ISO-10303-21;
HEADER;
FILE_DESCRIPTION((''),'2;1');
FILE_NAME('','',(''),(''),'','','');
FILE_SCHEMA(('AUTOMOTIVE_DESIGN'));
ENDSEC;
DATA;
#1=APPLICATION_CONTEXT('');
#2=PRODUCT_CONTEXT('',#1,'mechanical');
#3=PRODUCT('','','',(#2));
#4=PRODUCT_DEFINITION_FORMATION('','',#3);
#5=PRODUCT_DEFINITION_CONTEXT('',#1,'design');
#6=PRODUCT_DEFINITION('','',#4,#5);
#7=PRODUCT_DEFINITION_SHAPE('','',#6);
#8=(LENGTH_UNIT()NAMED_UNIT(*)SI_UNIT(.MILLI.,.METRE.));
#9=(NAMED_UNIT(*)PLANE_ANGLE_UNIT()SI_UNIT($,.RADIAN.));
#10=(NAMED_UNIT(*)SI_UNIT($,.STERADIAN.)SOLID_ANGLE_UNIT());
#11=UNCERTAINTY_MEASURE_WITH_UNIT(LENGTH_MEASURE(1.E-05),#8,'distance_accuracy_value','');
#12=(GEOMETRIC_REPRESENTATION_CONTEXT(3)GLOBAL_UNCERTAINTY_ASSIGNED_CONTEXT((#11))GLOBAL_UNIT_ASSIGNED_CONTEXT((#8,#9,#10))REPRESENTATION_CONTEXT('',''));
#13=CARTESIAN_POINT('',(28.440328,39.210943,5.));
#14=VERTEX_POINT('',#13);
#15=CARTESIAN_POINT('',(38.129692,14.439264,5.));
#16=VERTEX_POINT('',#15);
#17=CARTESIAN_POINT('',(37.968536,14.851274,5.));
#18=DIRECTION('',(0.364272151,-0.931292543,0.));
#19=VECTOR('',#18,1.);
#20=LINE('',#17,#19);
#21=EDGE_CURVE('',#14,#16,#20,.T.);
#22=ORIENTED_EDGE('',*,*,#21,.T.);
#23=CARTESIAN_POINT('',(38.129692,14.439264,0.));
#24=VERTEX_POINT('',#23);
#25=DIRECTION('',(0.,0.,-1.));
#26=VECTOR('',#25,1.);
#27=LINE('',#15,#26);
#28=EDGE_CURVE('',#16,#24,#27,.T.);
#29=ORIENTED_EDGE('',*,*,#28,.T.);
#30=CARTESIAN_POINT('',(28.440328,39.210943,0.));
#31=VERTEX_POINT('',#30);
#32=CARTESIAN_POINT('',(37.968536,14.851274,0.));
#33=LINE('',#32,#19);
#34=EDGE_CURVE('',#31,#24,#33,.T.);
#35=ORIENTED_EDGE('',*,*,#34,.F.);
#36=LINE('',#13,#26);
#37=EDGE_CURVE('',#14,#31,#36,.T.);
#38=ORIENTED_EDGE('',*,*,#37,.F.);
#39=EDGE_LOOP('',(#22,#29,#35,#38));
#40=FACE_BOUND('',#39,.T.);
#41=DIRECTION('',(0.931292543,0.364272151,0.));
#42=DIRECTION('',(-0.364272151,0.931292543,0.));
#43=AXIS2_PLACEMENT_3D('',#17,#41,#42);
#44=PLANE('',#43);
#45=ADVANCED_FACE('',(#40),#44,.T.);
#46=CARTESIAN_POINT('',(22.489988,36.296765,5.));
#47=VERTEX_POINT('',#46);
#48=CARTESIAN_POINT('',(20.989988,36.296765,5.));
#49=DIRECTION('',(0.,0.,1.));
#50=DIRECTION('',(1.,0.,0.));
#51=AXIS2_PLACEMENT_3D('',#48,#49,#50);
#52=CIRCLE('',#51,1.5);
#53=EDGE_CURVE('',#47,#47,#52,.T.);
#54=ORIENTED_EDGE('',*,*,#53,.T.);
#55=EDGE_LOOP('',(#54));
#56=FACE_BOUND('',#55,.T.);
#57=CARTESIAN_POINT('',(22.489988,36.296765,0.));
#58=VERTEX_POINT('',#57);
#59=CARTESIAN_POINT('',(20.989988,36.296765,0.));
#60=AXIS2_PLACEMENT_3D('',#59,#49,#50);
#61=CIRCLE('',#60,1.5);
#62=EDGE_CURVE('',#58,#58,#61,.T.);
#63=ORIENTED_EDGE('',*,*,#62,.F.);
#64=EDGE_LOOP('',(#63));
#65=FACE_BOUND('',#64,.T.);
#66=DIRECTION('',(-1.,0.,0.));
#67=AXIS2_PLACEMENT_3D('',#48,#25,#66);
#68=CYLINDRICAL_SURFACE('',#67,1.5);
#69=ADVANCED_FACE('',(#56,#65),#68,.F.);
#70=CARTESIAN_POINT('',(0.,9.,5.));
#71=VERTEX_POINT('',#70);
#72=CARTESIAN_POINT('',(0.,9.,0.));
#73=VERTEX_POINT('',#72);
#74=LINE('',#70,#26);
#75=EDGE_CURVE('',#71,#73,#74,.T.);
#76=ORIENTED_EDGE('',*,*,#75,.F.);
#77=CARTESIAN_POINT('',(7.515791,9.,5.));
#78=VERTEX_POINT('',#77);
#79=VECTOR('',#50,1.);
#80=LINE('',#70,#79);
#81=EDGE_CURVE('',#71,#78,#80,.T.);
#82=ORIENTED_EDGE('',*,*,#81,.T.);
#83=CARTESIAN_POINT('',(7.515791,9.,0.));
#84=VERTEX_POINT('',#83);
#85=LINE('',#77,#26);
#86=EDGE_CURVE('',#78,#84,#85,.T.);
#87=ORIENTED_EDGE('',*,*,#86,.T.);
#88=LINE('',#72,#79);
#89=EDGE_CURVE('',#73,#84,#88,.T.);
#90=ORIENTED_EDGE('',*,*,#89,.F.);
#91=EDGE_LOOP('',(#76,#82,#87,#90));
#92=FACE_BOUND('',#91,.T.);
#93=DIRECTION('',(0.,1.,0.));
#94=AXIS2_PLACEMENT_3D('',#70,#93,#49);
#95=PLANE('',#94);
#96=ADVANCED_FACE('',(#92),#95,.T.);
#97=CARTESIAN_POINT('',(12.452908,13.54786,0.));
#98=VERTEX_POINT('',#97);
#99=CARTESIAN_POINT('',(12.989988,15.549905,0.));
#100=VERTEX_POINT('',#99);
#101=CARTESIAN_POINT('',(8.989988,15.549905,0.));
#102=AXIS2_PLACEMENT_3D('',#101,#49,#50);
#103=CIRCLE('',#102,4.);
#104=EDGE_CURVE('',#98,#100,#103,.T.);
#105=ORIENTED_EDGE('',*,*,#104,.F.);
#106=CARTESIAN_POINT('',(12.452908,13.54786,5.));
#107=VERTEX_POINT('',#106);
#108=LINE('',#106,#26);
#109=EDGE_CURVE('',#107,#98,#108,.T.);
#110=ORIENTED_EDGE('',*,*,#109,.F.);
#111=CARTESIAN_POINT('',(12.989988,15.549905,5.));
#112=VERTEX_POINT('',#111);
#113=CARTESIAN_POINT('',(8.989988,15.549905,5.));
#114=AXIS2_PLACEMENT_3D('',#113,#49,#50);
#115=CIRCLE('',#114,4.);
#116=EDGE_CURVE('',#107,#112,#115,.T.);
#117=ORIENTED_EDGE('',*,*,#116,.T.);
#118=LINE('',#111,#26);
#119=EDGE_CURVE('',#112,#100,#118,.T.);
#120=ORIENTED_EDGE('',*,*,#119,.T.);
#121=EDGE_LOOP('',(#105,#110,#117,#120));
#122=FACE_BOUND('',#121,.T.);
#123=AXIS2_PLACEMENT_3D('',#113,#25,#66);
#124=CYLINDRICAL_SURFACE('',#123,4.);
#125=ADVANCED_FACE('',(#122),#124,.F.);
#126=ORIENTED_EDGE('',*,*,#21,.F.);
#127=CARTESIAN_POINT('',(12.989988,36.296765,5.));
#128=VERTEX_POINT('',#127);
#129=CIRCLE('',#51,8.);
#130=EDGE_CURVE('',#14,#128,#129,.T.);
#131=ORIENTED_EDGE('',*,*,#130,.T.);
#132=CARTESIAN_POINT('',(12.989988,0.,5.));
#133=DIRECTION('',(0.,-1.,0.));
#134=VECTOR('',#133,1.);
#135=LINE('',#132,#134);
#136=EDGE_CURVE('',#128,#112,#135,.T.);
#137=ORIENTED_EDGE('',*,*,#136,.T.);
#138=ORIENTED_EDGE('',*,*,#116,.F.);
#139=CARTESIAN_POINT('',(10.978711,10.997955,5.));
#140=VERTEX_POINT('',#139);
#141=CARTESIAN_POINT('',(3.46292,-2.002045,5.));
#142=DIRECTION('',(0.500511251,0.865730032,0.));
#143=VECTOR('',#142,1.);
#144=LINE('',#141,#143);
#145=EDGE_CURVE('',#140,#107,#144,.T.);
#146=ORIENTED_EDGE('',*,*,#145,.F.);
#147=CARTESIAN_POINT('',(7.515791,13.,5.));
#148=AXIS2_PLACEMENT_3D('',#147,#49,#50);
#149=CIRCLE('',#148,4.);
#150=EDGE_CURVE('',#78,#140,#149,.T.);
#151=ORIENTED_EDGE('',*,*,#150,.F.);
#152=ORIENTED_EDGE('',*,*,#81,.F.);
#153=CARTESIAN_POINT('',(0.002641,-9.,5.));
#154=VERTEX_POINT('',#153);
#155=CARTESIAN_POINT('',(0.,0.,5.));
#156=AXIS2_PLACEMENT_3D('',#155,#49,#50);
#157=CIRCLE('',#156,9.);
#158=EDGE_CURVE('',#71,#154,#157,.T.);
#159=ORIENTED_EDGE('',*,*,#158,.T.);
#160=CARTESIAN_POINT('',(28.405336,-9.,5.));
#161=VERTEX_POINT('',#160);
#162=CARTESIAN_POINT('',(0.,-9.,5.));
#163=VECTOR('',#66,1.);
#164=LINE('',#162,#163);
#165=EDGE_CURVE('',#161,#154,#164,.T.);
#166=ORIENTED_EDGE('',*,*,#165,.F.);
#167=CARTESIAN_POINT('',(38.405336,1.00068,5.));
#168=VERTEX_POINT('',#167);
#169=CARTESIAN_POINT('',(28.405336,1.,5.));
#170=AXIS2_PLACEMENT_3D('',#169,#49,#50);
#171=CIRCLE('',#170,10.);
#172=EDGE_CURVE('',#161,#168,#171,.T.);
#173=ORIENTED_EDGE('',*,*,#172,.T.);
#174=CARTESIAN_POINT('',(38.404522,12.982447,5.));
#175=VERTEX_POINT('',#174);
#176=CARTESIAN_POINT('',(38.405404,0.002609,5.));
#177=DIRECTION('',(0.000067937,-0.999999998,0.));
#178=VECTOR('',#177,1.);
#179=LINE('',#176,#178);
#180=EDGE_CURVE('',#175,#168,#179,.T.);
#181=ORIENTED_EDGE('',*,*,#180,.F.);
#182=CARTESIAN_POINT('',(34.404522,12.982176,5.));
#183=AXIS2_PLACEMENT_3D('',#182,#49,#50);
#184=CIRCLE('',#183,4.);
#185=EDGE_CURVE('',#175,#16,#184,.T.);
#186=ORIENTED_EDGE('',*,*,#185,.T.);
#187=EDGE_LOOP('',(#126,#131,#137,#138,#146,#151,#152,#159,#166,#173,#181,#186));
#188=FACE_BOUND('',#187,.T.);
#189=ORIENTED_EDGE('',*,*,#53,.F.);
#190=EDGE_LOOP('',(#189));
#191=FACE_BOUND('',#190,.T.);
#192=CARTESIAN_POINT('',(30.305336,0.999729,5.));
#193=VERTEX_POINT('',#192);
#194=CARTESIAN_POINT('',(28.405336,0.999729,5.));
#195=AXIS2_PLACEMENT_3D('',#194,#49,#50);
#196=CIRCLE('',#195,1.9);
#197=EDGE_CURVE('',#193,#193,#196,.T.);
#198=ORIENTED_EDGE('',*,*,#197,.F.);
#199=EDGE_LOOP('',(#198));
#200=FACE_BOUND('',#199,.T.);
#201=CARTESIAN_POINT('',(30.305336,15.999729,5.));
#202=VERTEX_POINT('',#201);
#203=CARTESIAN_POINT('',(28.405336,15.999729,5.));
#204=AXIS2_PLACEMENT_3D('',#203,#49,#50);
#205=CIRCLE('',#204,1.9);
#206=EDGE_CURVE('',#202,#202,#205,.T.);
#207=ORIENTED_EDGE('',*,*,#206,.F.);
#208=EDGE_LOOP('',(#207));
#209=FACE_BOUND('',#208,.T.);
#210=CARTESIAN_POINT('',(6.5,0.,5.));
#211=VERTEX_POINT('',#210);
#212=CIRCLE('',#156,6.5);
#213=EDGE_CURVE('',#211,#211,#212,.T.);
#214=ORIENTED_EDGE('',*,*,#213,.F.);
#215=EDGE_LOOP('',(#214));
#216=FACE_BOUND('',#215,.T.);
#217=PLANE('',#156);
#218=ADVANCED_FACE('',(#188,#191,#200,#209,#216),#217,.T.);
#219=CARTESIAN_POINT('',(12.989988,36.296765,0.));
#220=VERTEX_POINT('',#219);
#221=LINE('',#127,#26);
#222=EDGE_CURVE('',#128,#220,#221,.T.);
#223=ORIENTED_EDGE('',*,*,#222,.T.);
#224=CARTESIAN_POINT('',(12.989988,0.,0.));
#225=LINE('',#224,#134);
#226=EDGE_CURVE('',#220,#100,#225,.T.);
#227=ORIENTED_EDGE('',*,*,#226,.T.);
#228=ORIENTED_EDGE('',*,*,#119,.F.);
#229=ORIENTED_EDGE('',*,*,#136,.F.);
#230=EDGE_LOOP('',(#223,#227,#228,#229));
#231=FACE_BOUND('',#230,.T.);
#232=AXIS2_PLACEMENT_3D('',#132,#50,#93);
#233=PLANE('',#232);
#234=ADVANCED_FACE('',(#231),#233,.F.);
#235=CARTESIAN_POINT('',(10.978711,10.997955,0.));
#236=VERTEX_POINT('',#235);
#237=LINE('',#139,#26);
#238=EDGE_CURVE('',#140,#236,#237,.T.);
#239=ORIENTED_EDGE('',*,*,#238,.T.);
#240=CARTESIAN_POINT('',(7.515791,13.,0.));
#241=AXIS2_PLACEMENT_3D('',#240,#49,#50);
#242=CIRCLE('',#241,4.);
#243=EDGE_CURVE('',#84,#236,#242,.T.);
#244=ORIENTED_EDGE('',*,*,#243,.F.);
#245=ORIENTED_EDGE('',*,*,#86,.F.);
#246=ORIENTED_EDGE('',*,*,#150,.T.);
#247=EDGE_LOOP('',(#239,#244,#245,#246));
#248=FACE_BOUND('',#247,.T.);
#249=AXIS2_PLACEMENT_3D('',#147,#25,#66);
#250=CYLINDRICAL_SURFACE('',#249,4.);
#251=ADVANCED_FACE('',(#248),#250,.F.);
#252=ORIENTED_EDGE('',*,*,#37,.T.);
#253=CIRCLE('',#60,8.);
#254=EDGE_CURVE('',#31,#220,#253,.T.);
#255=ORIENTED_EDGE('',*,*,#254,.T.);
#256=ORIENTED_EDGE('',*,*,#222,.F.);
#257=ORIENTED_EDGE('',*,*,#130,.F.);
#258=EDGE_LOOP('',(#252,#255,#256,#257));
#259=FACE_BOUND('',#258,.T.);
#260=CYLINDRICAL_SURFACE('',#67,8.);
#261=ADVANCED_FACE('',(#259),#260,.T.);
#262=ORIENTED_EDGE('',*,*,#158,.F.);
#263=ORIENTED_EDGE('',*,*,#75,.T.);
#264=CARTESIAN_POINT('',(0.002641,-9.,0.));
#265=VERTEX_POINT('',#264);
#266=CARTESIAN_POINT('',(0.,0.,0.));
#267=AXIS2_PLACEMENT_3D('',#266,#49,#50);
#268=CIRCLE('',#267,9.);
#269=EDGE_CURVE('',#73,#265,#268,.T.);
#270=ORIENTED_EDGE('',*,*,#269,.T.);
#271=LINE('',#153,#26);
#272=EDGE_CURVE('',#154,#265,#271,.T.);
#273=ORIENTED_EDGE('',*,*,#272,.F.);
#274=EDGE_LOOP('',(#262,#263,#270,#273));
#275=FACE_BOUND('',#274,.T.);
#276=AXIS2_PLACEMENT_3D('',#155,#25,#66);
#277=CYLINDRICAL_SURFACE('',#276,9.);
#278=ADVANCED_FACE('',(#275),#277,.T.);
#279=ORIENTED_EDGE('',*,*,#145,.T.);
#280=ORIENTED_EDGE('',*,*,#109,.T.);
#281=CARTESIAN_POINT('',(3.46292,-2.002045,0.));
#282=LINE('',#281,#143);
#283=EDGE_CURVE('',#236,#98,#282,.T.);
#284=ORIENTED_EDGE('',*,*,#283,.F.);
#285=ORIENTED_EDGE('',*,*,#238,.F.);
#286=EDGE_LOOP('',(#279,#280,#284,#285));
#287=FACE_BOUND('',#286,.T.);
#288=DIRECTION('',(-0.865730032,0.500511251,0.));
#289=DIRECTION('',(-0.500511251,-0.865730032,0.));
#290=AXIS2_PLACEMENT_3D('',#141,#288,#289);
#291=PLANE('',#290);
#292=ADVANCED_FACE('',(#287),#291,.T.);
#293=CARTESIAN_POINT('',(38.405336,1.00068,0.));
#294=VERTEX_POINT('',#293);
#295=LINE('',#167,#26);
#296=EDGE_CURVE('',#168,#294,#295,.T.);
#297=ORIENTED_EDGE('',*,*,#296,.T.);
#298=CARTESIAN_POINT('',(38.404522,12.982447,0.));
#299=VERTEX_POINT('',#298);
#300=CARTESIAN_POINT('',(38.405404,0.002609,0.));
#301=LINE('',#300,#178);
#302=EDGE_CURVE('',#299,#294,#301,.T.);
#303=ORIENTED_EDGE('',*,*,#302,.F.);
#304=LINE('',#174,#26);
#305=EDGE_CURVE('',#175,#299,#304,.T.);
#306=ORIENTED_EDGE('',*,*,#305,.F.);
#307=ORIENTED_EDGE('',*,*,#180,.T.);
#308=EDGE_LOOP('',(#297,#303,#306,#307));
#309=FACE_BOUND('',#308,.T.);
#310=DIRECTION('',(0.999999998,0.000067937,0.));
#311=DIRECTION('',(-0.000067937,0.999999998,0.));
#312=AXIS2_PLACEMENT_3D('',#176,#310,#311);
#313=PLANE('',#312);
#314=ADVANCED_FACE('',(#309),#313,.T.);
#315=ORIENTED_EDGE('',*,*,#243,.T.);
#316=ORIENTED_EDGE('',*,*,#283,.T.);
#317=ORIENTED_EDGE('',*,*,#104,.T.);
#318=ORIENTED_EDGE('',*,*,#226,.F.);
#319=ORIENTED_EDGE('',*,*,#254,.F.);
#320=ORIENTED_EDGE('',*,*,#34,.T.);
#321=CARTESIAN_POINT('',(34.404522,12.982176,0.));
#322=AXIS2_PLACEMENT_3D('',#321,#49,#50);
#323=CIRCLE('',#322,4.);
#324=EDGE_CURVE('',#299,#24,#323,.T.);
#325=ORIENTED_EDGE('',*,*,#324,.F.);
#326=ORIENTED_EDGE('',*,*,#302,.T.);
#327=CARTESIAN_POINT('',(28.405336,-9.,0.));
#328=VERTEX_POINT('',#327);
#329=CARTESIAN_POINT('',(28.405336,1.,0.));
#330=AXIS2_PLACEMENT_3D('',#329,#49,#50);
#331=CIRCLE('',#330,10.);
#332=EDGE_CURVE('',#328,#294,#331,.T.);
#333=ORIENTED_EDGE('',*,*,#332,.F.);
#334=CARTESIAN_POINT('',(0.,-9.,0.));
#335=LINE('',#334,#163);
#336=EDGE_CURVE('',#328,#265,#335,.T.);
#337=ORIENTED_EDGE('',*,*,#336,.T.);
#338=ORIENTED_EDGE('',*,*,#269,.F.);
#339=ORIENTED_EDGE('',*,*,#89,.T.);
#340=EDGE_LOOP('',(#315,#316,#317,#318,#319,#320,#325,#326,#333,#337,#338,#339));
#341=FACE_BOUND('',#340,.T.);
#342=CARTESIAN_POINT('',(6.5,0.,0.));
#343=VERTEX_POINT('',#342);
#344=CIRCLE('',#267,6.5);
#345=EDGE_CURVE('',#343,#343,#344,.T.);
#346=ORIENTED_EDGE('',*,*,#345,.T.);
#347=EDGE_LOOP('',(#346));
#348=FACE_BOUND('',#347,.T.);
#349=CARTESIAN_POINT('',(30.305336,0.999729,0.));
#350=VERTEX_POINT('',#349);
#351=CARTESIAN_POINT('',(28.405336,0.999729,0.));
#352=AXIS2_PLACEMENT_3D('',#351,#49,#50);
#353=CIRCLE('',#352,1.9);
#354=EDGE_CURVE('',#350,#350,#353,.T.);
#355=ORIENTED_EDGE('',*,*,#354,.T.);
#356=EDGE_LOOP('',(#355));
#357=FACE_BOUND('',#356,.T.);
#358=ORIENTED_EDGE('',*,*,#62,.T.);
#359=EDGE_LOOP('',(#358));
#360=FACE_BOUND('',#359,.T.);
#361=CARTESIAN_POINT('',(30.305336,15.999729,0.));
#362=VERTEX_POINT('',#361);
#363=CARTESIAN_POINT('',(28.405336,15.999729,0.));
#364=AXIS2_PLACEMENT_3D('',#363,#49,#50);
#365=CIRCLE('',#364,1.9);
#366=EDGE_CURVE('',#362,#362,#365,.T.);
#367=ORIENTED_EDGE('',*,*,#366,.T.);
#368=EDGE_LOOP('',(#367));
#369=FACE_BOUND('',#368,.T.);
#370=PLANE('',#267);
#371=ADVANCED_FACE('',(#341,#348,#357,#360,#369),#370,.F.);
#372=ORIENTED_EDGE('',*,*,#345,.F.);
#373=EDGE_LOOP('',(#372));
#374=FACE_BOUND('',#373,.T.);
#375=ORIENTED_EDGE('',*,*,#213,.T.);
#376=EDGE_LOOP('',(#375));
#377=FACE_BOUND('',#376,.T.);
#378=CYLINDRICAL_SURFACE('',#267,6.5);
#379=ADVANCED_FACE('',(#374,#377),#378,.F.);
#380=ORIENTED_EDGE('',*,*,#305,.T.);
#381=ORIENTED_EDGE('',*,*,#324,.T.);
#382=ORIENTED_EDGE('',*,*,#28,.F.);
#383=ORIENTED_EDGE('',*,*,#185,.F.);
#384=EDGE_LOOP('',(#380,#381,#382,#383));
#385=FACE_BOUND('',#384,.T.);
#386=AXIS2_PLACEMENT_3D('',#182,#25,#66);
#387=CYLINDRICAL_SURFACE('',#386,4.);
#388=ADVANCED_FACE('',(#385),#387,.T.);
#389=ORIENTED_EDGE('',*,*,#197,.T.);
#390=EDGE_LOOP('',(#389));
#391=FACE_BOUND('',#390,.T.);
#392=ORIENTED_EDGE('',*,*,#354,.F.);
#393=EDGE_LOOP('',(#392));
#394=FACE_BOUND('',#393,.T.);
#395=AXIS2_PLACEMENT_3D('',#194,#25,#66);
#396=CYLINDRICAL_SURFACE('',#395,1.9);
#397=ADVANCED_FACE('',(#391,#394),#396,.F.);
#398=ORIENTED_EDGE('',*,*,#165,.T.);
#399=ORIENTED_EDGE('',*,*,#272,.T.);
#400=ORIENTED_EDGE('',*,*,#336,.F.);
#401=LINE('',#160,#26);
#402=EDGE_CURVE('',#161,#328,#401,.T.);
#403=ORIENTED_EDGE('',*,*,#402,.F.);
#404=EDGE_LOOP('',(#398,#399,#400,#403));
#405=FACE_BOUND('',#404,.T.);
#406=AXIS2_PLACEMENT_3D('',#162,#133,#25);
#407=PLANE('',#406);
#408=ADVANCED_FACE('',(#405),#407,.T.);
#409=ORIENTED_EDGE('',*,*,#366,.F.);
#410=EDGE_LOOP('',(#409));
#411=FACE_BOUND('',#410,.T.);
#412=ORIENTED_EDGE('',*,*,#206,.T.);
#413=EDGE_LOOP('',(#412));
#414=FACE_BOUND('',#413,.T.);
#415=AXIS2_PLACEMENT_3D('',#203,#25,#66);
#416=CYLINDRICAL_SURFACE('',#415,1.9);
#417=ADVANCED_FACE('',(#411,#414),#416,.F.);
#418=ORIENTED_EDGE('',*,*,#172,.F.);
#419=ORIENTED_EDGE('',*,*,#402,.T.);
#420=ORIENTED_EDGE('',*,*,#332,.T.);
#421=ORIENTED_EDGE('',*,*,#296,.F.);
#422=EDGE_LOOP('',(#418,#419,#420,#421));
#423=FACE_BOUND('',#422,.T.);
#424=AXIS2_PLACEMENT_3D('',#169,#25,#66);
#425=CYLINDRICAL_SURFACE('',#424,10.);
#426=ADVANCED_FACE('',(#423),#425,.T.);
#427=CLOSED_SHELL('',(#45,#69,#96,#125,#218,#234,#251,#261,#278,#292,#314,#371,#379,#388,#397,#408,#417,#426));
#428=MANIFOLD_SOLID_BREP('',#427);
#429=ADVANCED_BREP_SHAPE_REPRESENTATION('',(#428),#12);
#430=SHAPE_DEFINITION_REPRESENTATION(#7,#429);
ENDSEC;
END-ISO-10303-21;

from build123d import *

# Parameters (mm, degrees)
EXTRUDE_1_OUTLINE_R   = 5
EXTRUDE_1_OUTLINE_R_2 = 1.9
EXTRUDE_1_OUTLINE_R_3 = 1.5
EXTRUDE_1_DEPTH       = 5
SKETCH_2_R            = 6.5
CUT_EXTRUDE_1_DEPTH   = 59.840235174


# Read off the part's stored shape, not the designer's step: 凸台-拉伸1
with BuildPart() as part:
    # 凸台-拉伸1 outline → 凸台-拉伸1 (new body)
    with BuildSketch(Plane.XY):
        with BuildLine():
            ThreePointArc((0, 9), (-8.999999903, -0.001320394), (0.002640787, -8.999999613))
            Line((0.002640787, -8.999999613), (28.4053363, -8.999999613))
            ThreePointArc((28.4053363, -8.999999613), (35.476644301, -6.070827227), (38.405336277, 1.000679757))
            Line((38.405336277, 1.000679757), (38.404522272, 12.982447292))
            ThreePointArc((38.404522272, 12.982447292), (38.33518919, 13.723699418), (38.129692452, 14.439264147))
            Line((38.129692452, 14.439264147), (28.440328317, 39.210942539))
            ThreePointArc((28.440328317, 39.210942539), (19.507207266, 44.158149523), (12.989987975, 36.296765334))
            Line((12.989987975, 36.296765334), (12.989987975, 15.549905346))
            ThreePointArc((12.989987975, 15.549905346), (12.853385476, 14.513488564), (12.452908102, 13.547860343))
            Line((12.452908102, 13.547860343), (10.978711226, 10.997954609))
            ThreePointArc((10.978711226, 10.997954609), (9.514768336, 9.535307706), (7.515791099, 8.999999613))
            Line((7.515791099, 8.999999613), (0, 9))
        make_face()
        Circle(EXTRUDE_1_OUTLINE_R, mode=Mode.SUBTRACT)
        with Locations((28.405336318, 0.999728686)):
            Circle(EXTRUDE_1_OUTLINE_R_2, mode=Mode.SUBTRACT)
        with Locations((28.405336318, 15.999728686)):
            Circle(EXTRUDE_1_OUTLINE_R_2, mode=Mode.SUBTRACT)
        with Locations((20.989987975, 36.296765334)):
            Circle(EXTRUDE_1_OUTLINE_R_3, mode=Mode.SUBTRACT)
    extrude(amount=EXTRUDE_1_DEPTH)

    # 草图2 → 切除-拉伸1 (cut, through all)
    with BuildSketch(Plane.XY.offset(5)):
        Circle(SKETCH_2_R)
    extrude(amount=-CUT_EXTRUDE_1_DEPTH, mode=Mode.SUBTRACT)


solid = part.part
